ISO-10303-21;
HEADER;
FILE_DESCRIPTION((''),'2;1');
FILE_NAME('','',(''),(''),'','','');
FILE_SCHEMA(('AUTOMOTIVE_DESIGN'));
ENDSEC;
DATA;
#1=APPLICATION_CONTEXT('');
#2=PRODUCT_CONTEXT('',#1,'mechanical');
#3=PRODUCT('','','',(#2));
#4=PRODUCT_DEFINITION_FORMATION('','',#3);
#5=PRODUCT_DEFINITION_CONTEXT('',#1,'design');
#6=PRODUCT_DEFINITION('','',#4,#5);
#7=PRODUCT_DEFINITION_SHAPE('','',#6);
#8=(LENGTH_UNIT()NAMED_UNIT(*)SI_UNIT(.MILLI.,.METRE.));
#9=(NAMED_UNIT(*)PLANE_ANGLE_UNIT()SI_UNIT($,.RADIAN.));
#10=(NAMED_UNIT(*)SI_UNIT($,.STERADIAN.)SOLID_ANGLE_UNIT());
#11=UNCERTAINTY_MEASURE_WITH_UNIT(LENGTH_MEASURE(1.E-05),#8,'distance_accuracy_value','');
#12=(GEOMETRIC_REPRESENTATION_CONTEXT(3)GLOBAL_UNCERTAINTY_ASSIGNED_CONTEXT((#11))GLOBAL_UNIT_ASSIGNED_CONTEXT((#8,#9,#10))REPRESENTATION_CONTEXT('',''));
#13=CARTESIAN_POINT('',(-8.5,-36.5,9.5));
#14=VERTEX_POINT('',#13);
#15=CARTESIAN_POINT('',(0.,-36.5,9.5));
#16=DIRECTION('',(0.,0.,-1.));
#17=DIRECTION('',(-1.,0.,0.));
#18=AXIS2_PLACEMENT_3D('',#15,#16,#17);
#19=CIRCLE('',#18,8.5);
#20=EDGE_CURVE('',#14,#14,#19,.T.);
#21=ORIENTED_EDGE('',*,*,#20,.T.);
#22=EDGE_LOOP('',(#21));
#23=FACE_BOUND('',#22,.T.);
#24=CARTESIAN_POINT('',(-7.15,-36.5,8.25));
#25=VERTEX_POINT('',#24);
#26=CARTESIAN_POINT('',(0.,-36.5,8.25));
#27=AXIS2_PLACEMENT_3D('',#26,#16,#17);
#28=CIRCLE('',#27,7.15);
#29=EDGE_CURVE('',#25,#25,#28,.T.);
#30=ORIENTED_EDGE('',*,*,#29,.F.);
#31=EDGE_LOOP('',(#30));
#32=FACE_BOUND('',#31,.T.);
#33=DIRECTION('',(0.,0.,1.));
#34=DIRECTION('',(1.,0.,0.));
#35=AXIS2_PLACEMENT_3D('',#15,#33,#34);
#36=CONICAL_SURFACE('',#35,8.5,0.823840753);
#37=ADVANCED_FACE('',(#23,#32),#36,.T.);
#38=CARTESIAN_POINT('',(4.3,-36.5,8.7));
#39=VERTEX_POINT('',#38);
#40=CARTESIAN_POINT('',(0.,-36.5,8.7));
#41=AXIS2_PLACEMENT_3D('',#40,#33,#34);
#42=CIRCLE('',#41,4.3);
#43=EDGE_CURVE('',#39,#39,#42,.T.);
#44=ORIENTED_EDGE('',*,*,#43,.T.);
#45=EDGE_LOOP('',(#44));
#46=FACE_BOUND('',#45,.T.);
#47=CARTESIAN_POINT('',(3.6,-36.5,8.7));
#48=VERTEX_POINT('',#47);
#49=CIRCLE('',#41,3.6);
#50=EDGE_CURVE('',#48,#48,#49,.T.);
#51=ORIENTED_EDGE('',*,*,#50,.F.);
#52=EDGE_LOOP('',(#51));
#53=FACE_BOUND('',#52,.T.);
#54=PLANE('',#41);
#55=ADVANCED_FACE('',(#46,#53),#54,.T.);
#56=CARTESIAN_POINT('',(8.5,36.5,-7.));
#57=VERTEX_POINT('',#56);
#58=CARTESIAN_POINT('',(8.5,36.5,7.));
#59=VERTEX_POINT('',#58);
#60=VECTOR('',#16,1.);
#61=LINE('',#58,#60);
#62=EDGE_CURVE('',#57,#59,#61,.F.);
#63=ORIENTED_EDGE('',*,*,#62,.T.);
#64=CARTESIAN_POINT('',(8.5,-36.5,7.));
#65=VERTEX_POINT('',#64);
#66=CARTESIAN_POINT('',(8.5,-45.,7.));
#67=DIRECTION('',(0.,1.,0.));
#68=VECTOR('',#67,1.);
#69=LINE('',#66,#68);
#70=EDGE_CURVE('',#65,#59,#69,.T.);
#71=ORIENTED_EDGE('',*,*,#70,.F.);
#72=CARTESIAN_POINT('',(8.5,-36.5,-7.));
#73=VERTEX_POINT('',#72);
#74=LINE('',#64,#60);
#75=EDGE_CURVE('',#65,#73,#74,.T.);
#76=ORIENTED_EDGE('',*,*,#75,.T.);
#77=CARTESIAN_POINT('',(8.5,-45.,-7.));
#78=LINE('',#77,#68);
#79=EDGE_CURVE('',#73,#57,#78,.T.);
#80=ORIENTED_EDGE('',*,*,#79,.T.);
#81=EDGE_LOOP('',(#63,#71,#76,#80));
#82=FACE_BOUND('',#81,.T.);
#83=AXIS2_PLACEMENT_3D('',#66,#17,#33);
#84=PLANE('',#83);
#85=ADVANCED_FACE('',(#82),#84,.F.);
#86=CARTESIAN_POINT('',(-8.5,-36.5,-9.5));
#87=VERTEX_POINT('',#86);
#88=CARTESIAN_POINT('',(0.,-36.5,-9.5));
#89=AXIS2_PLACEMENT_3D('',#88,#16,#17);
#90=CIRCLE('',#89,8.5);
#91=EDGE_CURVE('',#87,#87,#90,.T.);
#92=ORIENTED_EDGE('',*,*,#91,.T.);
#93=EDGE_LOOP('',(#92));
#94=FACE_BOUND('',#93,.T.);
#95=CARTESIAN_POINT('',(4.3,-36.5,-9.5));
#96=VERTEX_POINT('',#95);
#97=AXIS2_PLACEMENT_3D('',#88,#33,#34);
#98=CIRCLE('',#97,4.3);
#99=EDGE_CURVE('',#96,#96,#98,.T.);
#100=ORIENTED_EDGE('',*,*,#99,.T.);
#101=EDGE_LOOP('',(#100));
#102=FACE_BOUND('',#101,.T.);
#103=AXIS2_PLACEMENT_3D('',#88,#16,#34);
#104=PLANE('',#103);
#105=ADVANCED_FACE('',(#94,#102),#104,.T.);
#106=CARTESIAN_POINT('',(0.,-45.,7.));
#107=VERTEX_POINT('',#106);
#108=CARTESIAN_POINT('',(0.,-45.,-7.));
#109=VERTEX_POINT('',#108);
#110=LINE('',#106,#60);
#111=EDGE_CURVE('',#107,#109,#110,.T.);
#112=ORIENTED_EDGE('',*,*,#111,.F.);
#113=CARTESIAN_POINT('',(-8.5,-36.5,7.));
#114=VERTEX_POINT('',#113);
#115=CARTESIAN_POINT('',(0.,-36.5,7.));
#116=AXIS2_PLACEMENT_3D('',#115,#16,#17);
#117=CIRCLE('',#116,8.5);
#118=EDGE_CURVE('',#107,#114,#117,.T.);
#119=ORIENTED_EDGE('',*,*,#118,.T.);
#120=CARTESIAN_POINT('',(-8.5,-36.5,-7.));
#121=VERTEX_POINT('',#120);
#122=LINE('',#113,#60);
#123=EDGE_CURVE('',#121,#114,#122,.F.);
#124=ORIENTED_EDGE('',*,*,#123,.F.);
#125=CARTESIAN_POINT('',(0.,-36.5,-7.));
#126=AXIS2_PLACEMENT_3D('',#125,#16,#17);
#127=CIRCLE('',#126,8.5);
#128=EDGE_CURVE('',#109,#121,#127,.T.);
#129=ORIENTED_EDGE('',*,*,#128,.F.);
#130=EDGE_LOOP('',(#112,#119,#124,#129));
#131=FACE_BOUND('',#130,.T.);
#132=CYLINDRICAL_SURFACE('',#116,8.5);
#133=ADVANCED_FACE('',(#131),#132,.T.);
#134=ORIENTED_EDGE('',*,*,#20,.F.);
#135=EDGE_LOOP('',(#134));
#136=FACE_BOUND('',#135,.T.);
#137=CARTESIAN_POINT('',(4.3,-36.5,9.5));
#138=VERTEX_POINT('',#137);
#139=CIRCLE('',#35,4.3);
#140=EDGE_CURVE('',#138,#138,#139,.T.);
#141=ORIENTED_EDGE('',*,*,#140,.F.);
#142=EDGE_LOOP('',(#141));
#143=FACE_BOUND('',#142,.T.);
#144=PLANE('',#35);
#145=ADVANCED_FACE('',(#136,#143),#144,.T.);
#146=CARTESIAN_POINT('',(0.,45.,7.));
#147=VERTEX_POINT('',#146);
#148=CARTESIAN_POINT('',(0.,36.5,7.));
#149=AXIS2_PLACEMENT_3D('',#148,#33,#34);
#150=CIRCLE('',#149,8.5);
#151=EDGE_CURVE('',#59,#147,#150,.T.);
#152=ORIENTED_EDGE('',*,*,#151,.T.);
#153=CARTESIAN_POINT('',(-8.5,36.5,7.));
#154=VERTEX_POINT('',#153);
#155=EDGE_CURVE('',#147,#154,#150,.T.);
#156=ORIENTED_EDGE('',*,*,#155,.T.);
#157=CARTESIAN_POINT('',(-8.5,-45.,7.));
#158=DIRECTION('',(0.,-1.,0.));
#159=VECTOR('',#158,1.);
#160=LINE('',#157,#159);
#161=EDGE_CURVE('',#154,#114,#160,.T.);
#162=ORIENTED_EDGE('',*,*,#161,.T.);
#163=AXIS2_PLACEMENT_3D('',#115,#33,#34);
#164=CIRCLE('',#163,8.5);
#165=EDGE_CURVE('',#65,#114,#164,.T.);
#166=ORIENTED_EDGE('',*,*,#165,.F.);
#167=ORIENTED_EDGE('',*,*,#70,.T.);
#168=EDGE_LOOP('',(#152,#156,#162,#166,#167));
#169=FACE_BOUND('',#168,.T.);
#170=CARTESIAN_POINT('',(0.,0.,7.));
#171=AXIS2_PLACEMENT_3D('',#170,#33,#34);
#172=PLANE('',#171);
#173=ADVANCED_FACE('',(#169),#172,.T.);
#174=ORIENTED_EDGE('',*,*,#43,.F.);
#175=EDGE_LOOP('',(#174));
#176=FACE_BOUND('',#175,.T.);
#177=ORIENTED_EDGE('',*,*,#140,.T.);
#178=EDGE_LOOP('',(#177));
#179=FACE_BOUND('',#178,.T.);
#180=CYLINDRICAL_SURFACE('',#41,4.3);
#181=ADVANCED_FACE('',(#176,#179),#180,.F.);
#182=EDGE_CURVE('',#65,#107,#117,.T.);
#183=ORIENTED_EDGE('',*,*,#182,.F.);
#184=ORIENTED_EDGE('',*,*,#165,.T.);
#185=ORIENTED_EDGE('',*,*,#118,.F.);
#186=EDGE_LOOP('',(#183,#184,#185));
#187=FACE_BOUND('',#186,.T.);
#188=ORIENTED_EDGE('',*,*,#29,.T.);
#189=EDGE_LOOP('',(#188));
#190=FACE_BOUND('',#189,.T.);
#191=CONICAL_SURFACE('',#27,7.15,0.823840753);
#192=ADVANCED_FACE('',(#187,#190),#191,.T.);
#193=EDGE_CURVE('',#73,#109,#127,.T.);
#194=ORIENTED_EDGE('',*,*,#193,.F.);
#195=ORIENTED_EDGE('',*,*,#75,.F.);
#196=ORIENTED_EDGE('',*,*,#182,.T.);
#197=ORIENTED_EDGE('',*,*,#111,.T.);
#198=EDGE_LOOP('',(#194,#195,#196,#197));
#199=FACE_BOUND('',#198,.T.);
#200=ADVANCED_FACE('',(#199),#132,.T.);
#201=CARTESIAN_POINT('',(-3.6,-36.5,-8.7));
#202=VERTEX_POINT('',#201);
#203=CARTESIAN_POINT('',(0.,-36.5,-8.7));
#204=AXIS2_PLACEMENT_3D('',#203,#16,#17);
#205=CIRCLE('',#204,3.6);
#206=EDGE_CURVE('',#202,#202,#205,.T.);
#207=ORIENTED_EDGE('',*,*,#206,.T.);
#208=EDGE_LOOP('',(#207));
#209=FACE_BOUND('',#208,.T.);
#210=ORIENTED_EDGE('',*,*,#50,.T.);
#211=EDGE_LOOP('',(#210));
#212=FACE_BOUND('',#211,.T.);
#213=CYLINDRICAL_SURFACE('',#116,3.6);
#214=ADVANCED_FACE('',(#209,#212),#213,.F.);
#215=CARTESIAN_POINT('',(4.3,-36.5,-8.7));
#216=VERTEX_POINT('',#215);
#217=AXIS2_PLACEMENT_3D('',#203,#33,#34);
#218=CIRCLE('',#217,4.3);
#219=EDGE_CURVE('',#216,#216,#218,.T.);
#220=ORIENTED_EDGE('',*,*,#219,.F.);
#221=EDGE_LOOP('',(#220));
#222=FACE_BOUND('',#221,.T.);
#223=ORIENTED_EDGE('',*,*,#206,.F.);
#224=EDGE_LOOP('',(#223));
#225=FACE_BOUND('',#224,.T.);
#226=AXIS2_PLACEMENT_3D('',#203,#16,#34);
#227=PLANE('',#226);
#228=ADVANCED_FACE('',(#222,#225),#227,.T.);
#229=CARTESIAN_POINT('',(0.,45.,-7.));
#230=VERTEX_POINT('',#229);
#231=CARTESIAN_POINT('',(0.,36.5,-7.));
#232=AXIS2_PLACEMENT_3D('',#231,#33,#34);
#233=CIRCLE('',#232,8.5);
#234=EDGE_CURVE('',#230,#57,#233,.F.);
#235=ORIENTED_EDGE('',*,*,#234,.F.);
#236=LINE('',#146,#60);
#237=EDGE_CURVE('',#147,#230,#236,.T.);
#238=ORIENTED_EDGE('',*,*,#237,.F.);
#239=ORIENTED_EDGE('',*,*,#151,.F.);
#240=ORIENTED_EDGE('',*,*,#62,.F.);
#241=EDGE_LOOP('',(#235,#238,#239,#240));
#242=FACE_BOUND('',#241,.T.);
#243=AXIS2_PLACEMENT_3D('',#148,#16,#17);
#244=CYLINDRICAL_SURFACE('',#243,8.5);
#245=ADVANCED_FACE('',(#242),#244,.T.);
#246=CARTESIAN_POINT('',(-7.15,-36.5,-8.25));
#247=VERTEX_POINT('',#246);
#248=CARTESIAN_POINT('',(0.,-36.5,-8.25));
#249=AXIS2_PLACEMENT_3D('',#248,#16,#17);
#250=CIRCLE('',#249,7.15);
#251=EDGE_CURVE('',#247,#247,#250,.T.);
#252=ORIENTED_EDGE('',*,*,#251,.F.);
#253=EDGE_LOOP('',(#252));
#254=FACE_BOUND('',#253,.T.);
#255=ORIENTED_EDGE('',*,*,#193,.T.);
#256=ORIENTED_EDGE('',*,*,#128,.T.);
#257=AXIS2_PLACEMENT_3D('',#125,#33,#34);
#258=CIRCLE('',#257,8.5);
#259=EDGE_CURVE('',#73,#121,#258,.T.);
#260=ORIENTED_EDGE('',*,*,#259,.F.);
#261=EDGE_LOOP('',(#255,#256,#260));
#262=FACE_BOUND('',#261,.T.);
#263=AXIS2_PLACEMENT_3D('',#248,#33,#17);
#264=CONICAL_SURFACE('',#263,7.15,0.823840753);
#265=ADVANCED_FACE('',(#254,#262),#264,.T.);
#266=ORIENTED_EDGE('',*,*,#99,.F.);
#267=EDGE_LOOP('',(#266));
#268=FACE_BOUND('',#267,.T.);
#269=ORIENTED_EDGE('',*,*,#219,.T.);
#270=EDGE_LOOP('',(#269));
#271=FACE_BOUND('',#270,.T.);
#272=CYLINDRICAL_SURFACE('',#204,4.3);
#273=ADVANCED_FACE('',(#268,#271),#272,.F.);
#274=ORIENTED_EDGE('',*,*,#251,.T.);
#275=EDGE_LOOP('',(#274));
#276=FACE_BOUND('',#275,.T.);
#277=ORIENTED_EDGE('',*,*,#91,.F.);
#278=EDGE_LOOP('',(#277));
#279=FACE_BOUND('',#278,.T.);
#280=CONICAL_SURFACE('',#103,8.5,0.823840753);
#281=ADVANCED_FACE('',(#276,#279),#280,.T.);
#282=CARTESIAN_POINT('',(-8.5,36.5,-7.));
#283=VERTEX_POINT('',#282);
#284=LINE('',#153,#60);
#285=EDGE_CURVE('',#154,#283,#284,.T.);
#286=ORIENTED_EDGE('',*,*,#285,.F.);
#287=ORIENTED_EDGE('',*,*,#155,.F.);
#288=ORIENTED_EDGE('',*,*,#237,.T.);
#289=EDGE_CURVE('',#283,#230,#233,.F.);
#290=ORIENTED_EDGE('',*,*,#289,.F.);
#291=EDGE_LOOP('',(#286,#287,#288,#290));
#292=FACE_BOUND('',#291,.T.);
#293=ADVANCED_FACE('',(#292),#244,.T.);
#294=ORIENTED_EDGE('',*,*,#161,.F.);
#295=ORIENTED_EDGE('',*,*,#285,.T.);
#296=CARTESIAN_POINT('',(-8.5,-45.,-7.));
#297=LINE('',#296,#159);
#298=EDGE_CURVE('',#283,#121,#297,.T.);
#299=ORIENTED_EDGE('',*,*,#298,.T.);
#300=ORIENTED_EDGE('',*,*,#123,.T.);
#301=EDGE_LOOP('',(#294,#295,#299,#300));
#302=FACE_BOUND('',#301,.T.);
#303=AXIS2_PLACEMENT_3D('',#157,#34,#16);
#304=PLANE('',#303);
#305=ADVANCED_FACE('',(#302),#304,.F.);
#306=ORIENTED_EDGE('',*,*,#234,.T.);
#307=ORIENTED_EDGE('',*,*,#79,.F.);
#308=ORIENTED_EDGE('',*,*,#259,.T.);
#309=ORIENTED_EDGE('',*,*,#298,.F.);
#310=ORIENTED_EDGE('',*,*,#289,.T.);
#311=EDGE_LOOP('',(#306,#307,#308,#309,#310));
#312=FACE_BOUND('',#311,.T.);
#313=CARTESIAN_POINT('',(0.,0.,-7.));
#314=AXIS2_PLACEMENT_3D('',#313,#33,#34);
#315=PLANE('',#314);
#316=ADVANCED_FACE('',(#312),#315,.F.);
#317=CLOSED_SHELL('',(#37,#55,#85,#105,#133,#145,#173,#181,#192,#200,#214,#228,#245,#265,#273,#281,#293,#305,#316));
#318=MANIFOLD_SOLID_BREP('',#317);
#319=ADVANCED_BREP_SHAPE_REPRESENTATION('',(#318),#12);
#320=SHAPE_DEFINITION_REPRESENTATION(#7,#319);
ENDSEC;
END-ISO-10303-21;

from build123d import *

# Parameters (mm, degrees)
SKETCH_1_W          = 17
SKETCH_1_H          = 90
SKETCH_1_R          = 3.6
EXTRUDE_1_DEPTH     = 7
FILLET_1_R          = 8.5
SKETCH_2_R          = 8.5
SKETCH_2_R_2        = 3.6
EXTRUDE_2_DEPTH     = 2.5
SKETCH_4_R          = 4.3
CUT_EXTRUDE_1_DEPTH = 0.8


with BuildPart() as part:
    # 스케치1 → 보스-돌출1 (new, symmetric)
    with BuildSketch(Plane.XY):
        Rectangle(SKETCH_1_W, SKETCH_1_H)
        with Locations((0, -36.5)):
            Circle(SKETCH_1_R, mode=Mode.SUBTRACT)
    extrude(amount=EXTRUDE_1_DEPTH, both=True)

    # 필렛1
    fillet_1_edges = [part.edges().sort_by_distance(p)[0] for p in [
        (8.5, -45, 0),
        (-8.5, -45, 0),
        (-8.5, 45, 0),
        (8.5, 45, 0),
    ]]
    fillet(fillet_1_edges, radius=FILLET_1_R - 0.0001)  # a hair under: the kernel refuses the full size

    # 스케치2 → 보스-돌출2 (add)
    with BuildSketch(Plane.XY.offset(7)):
        with Locations((0, -36.5)):
            Circle(SKETCH_2_R)
        with Locations((0, -36.5)):
            Circle(SKETCH_2_R_2, mode=Mode.SUBTRACT)
    extrude_2 = extrude(amount=EXTRUDE_2_DEPTH)

    # 스케치3 → 컷-회전1 (revolve, cut)
    with BuildSketch(Plane(origin=(0, 0, 0), x_dir=(0, 0, -1), z_dir=(1, 0, 0)), mode=Mode.PRIVATE) as cut_revolve_1_sk:
        Polygon((-9.5, -28), (-8.25, -29.35), (-7, -28), align=None)
    cut_revolve_1 = revolve(cut_revolve_1_sk.sketch.rotate(Axis((0, -36.5, 0), (0, 0, 1)), 90), axis=Axis((0, -36.5, 0), (0, 0, 1)), mode=Mode.SUBTRACT)

    # 스케치4 → 컷-돌출1 (cut)
    with BuildSketch(Plane.XY.offset(9.5)):
        with Locations((0, -36.5)):
            Circle(SKETCH_4_R)
    cut_extrude_1 = extrude(amount=-CUT_EXTRUDE_1_DEPTH, mode=Mode.SUBTRACT)

    # 대칭 복사1: 보스-돌출2, 컷-회전1, 컷-돌출1 across plane
    add(extrude_2.mirror(Plane.XY))
    add(cut_revolve_1.mirror(Plane.XY), mode=Mode.SUBTRACT)
    add(cut_extrude_1.mirror(Plane.XY), mode=Mode.SUBTRACT)


solid = part.part
